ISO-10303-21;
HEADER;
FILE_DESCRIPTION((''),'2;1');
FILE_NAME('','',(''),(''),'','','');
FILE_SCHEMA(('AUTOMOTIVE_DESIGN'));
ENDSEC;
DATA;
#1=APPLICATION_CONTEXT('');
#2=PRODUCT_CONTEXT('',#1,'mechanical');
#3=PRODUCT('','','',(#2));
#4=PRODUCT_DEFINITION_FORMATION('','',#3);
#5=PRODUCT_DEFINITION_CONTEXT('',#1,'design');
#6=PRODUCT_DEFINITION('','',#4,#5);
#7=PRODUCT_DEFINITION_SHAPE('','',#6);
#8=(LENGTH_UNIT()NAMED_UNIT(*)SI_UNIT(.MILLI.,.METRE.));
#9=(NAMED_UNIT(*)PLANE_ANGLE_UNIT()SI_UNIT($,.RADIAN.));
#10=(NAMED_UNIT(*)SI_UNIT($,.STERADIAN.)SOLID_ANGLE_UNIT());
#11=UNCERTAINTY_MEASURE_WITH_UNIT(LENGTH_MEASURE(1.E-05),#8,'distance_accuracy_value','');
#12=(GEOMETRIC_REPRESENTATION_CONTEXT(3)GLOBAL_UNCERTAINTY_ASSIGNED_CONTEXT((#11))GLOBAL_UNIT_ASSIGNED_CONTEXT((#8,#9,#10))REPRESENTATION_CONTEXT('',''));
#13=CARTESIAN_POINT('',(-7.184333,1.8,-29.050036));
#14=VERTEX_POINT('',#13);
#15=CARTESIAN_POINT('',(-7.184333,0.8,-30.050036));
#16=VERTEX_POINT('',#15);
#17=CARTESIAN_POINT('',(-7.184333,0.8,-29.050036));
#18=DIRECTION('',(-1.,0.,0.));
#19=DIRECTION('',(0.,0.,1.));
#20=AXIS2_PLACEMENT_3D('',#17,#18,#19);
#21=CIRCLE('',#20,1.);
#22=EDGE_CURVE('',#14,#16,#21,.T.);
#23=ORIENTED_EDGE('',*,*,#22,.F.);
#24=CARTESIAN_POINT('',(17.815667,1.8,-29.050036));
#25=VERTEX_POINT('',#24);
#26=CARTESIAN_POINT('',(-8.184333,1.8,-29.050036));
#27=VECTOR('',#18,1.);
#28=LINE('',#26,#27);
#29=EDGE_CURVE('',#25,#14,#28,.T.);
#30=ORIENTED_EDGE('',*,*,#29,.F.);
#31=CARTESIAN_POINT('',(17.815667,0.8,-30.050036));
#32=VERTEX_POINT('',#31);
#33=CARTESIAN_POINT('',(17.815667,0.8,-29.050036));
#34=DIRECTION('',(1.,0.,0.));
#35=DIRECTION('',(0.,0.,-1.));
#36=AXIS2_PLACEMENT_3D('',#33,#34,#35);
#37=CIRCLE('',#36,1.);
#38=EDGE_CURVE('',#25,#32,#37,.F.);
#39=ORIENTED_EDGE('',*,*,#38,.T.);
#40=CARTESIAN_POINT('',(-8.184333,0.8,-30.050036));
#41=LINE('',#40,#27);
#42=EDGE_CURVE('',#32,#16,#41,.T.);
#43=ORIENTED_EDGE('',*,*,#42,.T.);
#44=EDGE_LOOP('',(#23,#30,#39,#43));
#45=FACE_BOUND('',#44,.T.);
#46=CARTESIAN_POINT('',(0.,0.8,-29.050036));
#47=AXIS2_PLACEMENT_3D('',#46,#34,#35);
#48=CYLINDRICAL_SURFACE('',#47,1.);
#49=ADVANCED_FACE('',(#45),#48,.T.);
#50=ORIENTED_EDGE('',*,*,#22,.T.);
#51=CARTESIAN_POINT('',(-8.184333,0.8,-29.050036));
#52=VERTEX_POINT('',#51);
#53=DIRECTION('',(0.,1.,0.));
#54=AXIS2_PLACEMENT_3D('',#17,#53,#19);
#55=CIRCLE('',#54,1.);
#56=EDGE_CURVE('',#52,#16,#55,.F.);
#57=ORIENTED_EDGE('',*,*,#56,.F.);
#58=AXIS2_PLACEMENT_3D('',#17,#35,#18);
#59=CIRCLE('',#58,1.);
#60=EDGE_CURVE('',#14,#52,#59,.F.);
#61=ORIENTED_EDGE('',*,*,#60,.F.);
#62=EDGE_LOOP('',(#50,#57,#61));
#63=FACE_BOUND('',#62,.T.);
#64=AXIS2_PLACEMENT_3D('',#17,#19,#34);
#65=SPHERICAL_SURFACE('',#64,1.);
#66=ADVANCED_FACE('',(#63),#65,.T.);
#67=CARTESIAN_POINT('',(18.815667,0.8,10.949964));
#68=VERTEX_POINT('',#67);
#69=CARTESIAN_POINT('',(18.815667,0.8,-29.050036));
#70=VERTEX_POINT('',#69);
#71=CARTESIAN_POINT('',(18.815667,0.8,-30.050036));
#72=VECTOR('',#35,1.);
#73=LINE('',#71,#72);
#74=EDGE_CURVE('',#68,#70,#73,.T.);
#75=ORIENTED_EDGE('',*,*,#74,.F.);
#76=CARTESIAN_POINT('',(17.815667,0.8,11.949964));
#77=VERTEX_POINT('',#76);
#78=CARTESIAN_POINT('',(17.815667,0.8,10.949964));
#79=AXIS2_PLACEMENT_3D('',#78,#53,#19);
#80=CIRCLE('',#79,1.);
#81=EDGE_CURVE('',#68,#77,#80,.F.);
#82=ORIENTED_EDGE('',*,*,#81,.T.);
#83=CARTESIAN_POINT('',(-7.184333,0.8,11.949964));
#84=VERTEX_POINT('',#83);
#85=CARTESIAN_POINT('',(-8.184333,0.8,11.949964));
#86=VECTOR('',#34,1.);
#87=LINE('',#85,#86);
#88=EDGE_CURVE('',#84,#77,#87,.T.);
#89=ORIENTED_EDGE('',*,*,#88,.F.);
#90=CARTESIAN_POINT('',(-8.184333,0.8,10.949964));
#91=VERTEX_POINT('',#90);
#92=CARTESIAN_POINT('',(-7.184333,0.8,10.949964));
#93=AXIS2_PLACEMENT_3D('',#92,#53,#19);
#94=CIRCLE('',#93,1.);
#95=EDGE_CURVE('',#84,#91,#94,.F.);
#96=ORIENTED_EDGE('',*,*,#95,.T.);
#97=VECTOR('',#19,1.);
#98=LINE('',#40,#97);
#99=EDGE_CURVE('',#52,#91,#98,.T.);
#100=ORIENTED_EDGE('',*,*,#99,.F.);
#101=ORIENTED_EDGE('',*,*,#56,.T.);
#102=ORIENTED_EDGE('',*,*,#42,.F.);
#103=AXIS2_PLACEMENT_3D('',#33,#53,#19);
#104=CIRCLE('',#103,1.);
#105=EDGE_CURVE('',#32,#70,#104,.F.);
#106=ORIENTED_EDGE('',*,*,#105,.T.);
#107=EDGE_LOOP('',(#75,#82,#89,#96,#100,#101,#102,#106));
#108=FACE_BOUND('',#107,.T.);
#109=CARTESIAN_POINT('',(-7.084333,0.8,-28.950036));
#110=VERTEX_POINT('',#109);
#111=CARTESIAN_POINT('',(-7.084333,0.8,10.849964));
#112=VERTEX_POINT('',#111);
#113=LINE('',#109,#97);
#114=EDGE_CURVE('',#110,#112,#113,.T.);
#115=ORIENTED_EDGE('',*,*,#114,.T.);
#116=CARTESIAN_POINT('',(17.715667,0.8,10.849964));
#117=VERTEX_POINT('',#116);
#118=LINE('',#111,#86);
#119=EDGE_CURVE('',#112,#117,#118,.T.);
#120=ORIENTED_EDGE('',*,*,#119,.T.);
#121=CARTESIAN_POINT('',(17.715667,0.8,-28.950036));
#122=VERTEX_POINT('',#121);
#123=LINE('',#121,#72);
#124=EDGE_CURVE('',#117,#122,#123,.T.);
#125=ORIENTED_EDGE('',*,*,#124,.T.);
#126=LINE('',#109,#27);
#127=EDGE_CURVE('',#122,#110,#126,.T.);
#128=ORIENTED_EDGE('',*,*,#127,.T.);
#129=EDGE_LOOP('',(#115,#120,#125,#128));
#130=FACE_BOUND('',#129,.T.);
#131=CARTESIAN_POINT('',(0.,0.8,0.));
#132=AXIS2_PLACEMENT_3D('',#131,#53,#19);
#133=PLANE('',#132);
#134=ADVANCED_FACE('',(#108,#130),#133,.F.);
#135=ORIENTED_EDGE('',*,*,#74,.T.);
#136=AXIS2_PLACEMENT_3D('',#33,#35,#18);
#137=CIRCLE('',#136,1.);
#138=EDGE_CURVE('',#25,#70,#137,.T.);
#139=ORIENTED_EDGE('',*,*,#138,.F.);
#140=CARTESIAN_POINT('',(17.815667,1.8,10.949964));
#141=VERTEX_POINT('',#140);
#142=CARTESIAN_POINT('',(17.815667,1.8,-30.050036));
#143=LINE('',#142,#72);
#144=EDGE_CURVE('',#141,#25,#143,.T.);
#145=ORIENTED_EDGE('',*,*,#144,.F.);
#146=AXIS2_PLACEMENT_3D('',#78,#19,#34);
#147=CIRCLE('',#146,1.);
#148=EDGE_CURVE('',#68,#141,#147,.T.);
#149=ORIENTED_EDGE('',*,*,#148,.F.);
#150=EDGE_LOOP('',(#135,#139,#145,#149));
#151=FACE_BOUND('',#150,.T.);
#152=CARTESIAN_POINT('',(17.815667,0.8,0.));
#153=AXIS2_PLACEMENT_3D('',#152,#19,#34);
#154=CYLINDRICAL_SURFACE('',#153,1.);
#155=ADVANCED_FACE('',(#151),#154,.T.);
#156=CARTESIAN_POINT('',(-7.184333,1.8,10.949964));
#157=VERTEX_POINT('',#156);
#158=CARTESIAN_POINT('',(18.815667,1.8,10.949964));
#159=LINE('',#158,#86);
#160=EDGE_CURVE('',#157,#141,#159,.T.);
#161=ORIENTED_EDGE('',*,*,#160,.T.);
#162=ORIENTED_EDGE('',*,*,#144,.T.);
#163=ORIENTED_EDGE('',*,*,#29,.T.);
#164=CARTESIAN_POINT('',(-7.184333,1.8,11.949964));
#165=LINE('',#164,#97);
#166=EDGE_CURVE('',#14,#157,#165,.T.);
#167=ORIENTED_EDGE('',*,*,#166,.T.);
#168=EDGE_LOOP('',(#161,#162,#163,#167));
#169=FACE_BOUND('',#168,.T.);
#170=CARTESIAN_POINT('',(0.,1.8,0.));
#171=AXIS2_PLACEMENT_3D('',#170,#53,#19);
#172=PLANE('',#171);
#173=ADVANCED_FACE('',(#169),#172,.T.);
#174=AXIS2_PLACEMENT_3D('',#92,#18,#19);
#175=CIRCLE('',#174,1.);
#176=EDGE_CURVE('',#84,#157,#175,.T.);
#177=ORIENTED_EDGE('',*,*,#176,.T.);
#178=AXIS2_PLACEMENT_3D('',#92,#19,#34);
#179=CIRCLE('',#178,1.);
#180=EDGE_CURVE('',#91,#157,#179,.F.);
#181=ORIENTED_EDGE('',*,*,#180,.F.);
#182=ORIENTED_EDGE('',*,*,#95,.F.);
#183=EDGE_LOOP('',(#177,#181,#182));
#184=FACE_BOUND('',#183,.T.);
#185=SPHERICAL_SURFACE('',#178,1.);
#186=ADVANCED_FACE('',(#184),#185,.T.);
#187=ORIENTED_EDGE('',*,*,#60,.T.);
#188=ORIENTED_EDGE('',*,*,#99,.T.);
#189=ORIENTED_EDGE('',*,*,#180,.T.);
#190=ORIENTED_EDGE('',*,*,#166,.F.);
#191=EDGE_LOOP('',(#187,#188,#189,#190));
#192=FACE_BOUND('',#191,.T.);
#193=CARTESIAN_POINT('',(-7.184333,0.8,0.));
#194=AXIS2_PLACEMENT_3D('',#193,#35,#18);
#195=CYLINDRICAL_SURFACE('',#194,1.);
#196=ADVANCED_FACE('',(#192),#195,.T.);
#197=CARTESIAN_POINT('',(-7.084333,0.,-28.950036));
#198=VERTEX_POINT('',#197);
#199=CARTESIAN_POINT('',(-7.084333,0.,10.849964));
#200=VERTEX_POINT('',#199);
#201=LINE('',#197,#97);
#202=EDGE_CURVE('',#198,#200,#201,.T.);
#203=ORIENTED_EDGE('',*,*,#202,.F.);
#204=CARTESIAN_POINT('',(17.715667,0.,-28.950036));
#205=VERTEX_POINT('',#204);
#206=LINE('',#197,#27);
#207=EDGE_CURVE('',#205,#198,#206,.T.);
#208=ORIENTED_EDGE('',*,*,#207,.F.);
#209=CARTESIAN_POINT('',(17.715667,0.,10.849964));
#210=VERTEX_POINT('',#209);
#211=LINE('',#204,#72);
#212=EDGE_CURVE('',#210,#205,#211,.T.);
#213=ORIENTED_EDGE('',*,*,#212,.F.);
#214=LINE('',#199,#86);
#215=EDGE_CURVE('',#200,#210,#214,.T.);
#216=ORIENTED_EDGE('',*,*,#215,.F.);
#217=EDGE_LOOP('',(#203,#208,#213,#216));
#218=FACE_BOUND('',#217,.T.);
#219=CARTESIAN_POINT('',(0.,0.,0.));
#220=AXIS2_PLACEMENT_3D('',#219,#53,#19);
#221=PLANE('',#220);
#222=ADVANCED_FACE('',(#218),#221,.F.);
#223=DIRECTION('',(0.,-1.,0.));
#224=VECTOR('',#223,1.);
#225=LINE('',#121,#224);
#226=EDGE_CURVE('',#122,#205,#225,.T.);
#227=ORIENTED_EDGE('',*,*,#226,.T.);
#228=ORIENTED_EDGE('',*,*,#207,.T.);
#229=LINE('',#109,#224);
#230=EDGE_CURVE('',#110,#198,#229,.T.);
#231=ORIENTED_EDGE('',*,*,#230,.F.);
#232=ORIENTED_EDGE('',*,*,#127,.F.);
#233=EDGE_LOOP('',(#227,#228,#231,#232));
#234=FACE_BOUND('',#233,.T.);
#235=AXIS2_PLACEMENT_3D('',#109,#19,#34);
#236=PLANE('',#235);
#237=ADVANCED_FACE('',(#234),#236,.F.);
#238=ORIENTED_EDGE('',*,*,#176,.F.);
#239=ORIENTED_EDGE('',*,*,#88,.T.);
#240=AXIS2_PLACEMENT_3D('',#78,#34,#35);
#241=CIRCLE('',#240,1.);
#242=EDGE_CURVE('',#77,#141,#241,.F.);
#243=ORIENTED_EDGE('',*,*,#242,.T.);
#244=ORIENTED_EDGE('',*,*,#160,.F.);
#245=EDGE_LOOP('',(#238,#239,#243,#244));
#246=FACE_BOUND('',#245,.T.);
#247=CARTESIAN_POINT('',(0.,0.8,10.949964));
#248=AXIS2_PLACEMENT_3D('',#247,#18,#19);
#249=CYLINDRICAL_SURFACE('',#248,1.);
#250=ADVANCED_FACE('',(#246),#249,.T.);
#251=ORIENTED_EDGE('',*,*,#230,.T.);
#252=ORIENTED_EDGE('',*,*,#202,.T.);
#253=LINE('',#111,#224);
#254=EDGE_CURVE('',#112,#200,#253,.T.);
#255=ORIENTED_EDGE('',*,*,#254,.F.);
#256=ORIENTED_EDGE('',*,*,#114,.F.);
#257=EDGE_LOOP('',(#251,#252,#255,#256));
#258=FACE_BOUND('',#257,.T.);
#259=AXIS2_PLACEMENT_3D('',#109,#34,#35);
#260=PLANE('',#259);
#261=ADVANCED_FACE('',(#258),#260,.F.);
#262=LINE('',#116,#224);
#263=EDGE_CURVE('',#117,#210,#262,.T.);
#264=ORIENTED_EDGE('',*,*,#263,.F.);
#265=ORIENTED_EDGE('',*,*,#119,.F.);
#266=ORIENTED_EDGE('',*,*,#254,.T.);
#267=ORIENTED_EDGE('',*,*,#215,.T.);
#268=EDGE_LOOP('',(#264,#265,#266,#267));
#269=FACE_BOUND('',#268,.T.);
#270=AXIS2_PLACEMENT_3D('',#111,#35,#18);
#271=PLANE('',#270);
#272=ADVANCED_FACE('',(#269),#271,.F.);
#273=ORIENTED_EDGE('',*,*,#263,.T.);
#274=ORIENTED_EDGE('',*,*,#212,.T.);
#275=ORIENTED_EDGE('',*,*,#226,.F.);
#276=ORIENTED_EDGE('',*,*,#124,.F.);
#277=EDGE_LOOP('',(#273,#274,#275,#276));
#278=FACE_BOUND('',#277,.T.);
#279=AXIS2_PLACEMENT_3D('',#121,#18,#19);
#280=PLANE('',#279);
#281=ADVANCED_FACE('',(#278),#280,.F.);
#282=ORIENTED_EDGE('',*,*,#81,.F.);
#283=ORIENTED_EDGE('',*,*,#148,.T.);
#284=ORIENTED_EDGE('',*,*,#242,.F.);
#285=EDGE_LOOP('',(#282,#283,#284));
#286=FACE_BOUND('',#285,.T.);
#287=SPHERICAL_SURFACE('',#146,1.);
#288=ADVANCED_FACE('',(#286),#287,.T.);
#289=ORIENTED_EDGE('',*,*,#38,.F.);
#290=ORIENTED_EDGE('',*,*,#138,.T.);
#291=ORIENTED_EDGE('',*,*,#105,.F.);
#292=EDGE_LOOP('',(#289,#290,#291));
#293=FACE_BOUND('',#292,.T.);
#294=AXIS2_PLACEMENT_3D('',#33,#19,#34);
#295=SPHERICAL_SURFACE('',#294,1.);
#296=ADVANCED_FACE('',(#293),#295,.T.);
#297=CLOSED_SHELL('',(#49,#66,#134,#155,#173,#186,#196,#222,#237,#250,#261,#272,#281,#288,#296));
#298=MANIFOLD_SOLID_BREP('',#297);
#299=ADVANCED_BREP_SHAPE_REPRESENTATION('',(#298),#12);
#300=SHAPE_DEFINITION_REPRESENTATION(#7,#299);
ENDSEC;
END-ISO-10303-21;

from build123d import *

# Parameters (mm, degrees)
SKETCH_1_W      = 24.8
SKETCH_1_H      = 39.8
EXTRUDE_1_DEPTH = 0.8
SKETCH_2_W      = 27
SKETCH_2_H      = 42
EXTRUDE_2_DEPTH = 1
FILLET_1_R      = 1


with BuildPart() as part:
    # ｽｹｯﾁ1 → ﾎﾞｽ - 押し出し1 (new body)
    with BuildSketch(Plane(origin=(0, 0, 0), x_dir=(1, 0, 0), z_dir=(0, 1, 0))):
        with Locations((5.315666607, 9.050036267)):
            Rectangle(SKETCH_1_W, SKETCH_1_H)
    extrude(amount=EXTRUDE_1_DEPTH)

    # ｽｹｯﾁ2 → ﾎﾞｽ - 押し出し2 (add)
    with BuildSketch(Plane(origin=(0, 0.8, 0), x_dir=(1, 0, 0), z_dir=(0, 1, 0))):
        with Locations((5.315666607, 9.050036267)):
            Rectangle(SKETCH_2_W, SKETCH_2_H)
    extrude(amount=EXTRUDE_2_DEPTH)

    # ﾌｨﾚｯﾄ1
    fillet_1_edges = [part.edges().sort_by_distance(p)[0] for p in [
        (-8.184333393, 1.3, -30.050036267),
        (-8.184333393, 1.3, 11.949963733),
        (18.815666607, 1.3, 11.949963733),
        (18.815666607, 1.3, -30.050036267),
        (-8.184333393, 1.8, -9.050036267),
        (5.315666607, 1.8, 11.949963733),
        (18.815666607, 1.8, -9.050036267),
        (5.315666607, 1.8, -30.050036267),
    ]]
    fillet(fillet_1_edges, radius=FILLET_1_R - 0.0001)  # a hair under: the kernel refuses the full size


solid = part.part
